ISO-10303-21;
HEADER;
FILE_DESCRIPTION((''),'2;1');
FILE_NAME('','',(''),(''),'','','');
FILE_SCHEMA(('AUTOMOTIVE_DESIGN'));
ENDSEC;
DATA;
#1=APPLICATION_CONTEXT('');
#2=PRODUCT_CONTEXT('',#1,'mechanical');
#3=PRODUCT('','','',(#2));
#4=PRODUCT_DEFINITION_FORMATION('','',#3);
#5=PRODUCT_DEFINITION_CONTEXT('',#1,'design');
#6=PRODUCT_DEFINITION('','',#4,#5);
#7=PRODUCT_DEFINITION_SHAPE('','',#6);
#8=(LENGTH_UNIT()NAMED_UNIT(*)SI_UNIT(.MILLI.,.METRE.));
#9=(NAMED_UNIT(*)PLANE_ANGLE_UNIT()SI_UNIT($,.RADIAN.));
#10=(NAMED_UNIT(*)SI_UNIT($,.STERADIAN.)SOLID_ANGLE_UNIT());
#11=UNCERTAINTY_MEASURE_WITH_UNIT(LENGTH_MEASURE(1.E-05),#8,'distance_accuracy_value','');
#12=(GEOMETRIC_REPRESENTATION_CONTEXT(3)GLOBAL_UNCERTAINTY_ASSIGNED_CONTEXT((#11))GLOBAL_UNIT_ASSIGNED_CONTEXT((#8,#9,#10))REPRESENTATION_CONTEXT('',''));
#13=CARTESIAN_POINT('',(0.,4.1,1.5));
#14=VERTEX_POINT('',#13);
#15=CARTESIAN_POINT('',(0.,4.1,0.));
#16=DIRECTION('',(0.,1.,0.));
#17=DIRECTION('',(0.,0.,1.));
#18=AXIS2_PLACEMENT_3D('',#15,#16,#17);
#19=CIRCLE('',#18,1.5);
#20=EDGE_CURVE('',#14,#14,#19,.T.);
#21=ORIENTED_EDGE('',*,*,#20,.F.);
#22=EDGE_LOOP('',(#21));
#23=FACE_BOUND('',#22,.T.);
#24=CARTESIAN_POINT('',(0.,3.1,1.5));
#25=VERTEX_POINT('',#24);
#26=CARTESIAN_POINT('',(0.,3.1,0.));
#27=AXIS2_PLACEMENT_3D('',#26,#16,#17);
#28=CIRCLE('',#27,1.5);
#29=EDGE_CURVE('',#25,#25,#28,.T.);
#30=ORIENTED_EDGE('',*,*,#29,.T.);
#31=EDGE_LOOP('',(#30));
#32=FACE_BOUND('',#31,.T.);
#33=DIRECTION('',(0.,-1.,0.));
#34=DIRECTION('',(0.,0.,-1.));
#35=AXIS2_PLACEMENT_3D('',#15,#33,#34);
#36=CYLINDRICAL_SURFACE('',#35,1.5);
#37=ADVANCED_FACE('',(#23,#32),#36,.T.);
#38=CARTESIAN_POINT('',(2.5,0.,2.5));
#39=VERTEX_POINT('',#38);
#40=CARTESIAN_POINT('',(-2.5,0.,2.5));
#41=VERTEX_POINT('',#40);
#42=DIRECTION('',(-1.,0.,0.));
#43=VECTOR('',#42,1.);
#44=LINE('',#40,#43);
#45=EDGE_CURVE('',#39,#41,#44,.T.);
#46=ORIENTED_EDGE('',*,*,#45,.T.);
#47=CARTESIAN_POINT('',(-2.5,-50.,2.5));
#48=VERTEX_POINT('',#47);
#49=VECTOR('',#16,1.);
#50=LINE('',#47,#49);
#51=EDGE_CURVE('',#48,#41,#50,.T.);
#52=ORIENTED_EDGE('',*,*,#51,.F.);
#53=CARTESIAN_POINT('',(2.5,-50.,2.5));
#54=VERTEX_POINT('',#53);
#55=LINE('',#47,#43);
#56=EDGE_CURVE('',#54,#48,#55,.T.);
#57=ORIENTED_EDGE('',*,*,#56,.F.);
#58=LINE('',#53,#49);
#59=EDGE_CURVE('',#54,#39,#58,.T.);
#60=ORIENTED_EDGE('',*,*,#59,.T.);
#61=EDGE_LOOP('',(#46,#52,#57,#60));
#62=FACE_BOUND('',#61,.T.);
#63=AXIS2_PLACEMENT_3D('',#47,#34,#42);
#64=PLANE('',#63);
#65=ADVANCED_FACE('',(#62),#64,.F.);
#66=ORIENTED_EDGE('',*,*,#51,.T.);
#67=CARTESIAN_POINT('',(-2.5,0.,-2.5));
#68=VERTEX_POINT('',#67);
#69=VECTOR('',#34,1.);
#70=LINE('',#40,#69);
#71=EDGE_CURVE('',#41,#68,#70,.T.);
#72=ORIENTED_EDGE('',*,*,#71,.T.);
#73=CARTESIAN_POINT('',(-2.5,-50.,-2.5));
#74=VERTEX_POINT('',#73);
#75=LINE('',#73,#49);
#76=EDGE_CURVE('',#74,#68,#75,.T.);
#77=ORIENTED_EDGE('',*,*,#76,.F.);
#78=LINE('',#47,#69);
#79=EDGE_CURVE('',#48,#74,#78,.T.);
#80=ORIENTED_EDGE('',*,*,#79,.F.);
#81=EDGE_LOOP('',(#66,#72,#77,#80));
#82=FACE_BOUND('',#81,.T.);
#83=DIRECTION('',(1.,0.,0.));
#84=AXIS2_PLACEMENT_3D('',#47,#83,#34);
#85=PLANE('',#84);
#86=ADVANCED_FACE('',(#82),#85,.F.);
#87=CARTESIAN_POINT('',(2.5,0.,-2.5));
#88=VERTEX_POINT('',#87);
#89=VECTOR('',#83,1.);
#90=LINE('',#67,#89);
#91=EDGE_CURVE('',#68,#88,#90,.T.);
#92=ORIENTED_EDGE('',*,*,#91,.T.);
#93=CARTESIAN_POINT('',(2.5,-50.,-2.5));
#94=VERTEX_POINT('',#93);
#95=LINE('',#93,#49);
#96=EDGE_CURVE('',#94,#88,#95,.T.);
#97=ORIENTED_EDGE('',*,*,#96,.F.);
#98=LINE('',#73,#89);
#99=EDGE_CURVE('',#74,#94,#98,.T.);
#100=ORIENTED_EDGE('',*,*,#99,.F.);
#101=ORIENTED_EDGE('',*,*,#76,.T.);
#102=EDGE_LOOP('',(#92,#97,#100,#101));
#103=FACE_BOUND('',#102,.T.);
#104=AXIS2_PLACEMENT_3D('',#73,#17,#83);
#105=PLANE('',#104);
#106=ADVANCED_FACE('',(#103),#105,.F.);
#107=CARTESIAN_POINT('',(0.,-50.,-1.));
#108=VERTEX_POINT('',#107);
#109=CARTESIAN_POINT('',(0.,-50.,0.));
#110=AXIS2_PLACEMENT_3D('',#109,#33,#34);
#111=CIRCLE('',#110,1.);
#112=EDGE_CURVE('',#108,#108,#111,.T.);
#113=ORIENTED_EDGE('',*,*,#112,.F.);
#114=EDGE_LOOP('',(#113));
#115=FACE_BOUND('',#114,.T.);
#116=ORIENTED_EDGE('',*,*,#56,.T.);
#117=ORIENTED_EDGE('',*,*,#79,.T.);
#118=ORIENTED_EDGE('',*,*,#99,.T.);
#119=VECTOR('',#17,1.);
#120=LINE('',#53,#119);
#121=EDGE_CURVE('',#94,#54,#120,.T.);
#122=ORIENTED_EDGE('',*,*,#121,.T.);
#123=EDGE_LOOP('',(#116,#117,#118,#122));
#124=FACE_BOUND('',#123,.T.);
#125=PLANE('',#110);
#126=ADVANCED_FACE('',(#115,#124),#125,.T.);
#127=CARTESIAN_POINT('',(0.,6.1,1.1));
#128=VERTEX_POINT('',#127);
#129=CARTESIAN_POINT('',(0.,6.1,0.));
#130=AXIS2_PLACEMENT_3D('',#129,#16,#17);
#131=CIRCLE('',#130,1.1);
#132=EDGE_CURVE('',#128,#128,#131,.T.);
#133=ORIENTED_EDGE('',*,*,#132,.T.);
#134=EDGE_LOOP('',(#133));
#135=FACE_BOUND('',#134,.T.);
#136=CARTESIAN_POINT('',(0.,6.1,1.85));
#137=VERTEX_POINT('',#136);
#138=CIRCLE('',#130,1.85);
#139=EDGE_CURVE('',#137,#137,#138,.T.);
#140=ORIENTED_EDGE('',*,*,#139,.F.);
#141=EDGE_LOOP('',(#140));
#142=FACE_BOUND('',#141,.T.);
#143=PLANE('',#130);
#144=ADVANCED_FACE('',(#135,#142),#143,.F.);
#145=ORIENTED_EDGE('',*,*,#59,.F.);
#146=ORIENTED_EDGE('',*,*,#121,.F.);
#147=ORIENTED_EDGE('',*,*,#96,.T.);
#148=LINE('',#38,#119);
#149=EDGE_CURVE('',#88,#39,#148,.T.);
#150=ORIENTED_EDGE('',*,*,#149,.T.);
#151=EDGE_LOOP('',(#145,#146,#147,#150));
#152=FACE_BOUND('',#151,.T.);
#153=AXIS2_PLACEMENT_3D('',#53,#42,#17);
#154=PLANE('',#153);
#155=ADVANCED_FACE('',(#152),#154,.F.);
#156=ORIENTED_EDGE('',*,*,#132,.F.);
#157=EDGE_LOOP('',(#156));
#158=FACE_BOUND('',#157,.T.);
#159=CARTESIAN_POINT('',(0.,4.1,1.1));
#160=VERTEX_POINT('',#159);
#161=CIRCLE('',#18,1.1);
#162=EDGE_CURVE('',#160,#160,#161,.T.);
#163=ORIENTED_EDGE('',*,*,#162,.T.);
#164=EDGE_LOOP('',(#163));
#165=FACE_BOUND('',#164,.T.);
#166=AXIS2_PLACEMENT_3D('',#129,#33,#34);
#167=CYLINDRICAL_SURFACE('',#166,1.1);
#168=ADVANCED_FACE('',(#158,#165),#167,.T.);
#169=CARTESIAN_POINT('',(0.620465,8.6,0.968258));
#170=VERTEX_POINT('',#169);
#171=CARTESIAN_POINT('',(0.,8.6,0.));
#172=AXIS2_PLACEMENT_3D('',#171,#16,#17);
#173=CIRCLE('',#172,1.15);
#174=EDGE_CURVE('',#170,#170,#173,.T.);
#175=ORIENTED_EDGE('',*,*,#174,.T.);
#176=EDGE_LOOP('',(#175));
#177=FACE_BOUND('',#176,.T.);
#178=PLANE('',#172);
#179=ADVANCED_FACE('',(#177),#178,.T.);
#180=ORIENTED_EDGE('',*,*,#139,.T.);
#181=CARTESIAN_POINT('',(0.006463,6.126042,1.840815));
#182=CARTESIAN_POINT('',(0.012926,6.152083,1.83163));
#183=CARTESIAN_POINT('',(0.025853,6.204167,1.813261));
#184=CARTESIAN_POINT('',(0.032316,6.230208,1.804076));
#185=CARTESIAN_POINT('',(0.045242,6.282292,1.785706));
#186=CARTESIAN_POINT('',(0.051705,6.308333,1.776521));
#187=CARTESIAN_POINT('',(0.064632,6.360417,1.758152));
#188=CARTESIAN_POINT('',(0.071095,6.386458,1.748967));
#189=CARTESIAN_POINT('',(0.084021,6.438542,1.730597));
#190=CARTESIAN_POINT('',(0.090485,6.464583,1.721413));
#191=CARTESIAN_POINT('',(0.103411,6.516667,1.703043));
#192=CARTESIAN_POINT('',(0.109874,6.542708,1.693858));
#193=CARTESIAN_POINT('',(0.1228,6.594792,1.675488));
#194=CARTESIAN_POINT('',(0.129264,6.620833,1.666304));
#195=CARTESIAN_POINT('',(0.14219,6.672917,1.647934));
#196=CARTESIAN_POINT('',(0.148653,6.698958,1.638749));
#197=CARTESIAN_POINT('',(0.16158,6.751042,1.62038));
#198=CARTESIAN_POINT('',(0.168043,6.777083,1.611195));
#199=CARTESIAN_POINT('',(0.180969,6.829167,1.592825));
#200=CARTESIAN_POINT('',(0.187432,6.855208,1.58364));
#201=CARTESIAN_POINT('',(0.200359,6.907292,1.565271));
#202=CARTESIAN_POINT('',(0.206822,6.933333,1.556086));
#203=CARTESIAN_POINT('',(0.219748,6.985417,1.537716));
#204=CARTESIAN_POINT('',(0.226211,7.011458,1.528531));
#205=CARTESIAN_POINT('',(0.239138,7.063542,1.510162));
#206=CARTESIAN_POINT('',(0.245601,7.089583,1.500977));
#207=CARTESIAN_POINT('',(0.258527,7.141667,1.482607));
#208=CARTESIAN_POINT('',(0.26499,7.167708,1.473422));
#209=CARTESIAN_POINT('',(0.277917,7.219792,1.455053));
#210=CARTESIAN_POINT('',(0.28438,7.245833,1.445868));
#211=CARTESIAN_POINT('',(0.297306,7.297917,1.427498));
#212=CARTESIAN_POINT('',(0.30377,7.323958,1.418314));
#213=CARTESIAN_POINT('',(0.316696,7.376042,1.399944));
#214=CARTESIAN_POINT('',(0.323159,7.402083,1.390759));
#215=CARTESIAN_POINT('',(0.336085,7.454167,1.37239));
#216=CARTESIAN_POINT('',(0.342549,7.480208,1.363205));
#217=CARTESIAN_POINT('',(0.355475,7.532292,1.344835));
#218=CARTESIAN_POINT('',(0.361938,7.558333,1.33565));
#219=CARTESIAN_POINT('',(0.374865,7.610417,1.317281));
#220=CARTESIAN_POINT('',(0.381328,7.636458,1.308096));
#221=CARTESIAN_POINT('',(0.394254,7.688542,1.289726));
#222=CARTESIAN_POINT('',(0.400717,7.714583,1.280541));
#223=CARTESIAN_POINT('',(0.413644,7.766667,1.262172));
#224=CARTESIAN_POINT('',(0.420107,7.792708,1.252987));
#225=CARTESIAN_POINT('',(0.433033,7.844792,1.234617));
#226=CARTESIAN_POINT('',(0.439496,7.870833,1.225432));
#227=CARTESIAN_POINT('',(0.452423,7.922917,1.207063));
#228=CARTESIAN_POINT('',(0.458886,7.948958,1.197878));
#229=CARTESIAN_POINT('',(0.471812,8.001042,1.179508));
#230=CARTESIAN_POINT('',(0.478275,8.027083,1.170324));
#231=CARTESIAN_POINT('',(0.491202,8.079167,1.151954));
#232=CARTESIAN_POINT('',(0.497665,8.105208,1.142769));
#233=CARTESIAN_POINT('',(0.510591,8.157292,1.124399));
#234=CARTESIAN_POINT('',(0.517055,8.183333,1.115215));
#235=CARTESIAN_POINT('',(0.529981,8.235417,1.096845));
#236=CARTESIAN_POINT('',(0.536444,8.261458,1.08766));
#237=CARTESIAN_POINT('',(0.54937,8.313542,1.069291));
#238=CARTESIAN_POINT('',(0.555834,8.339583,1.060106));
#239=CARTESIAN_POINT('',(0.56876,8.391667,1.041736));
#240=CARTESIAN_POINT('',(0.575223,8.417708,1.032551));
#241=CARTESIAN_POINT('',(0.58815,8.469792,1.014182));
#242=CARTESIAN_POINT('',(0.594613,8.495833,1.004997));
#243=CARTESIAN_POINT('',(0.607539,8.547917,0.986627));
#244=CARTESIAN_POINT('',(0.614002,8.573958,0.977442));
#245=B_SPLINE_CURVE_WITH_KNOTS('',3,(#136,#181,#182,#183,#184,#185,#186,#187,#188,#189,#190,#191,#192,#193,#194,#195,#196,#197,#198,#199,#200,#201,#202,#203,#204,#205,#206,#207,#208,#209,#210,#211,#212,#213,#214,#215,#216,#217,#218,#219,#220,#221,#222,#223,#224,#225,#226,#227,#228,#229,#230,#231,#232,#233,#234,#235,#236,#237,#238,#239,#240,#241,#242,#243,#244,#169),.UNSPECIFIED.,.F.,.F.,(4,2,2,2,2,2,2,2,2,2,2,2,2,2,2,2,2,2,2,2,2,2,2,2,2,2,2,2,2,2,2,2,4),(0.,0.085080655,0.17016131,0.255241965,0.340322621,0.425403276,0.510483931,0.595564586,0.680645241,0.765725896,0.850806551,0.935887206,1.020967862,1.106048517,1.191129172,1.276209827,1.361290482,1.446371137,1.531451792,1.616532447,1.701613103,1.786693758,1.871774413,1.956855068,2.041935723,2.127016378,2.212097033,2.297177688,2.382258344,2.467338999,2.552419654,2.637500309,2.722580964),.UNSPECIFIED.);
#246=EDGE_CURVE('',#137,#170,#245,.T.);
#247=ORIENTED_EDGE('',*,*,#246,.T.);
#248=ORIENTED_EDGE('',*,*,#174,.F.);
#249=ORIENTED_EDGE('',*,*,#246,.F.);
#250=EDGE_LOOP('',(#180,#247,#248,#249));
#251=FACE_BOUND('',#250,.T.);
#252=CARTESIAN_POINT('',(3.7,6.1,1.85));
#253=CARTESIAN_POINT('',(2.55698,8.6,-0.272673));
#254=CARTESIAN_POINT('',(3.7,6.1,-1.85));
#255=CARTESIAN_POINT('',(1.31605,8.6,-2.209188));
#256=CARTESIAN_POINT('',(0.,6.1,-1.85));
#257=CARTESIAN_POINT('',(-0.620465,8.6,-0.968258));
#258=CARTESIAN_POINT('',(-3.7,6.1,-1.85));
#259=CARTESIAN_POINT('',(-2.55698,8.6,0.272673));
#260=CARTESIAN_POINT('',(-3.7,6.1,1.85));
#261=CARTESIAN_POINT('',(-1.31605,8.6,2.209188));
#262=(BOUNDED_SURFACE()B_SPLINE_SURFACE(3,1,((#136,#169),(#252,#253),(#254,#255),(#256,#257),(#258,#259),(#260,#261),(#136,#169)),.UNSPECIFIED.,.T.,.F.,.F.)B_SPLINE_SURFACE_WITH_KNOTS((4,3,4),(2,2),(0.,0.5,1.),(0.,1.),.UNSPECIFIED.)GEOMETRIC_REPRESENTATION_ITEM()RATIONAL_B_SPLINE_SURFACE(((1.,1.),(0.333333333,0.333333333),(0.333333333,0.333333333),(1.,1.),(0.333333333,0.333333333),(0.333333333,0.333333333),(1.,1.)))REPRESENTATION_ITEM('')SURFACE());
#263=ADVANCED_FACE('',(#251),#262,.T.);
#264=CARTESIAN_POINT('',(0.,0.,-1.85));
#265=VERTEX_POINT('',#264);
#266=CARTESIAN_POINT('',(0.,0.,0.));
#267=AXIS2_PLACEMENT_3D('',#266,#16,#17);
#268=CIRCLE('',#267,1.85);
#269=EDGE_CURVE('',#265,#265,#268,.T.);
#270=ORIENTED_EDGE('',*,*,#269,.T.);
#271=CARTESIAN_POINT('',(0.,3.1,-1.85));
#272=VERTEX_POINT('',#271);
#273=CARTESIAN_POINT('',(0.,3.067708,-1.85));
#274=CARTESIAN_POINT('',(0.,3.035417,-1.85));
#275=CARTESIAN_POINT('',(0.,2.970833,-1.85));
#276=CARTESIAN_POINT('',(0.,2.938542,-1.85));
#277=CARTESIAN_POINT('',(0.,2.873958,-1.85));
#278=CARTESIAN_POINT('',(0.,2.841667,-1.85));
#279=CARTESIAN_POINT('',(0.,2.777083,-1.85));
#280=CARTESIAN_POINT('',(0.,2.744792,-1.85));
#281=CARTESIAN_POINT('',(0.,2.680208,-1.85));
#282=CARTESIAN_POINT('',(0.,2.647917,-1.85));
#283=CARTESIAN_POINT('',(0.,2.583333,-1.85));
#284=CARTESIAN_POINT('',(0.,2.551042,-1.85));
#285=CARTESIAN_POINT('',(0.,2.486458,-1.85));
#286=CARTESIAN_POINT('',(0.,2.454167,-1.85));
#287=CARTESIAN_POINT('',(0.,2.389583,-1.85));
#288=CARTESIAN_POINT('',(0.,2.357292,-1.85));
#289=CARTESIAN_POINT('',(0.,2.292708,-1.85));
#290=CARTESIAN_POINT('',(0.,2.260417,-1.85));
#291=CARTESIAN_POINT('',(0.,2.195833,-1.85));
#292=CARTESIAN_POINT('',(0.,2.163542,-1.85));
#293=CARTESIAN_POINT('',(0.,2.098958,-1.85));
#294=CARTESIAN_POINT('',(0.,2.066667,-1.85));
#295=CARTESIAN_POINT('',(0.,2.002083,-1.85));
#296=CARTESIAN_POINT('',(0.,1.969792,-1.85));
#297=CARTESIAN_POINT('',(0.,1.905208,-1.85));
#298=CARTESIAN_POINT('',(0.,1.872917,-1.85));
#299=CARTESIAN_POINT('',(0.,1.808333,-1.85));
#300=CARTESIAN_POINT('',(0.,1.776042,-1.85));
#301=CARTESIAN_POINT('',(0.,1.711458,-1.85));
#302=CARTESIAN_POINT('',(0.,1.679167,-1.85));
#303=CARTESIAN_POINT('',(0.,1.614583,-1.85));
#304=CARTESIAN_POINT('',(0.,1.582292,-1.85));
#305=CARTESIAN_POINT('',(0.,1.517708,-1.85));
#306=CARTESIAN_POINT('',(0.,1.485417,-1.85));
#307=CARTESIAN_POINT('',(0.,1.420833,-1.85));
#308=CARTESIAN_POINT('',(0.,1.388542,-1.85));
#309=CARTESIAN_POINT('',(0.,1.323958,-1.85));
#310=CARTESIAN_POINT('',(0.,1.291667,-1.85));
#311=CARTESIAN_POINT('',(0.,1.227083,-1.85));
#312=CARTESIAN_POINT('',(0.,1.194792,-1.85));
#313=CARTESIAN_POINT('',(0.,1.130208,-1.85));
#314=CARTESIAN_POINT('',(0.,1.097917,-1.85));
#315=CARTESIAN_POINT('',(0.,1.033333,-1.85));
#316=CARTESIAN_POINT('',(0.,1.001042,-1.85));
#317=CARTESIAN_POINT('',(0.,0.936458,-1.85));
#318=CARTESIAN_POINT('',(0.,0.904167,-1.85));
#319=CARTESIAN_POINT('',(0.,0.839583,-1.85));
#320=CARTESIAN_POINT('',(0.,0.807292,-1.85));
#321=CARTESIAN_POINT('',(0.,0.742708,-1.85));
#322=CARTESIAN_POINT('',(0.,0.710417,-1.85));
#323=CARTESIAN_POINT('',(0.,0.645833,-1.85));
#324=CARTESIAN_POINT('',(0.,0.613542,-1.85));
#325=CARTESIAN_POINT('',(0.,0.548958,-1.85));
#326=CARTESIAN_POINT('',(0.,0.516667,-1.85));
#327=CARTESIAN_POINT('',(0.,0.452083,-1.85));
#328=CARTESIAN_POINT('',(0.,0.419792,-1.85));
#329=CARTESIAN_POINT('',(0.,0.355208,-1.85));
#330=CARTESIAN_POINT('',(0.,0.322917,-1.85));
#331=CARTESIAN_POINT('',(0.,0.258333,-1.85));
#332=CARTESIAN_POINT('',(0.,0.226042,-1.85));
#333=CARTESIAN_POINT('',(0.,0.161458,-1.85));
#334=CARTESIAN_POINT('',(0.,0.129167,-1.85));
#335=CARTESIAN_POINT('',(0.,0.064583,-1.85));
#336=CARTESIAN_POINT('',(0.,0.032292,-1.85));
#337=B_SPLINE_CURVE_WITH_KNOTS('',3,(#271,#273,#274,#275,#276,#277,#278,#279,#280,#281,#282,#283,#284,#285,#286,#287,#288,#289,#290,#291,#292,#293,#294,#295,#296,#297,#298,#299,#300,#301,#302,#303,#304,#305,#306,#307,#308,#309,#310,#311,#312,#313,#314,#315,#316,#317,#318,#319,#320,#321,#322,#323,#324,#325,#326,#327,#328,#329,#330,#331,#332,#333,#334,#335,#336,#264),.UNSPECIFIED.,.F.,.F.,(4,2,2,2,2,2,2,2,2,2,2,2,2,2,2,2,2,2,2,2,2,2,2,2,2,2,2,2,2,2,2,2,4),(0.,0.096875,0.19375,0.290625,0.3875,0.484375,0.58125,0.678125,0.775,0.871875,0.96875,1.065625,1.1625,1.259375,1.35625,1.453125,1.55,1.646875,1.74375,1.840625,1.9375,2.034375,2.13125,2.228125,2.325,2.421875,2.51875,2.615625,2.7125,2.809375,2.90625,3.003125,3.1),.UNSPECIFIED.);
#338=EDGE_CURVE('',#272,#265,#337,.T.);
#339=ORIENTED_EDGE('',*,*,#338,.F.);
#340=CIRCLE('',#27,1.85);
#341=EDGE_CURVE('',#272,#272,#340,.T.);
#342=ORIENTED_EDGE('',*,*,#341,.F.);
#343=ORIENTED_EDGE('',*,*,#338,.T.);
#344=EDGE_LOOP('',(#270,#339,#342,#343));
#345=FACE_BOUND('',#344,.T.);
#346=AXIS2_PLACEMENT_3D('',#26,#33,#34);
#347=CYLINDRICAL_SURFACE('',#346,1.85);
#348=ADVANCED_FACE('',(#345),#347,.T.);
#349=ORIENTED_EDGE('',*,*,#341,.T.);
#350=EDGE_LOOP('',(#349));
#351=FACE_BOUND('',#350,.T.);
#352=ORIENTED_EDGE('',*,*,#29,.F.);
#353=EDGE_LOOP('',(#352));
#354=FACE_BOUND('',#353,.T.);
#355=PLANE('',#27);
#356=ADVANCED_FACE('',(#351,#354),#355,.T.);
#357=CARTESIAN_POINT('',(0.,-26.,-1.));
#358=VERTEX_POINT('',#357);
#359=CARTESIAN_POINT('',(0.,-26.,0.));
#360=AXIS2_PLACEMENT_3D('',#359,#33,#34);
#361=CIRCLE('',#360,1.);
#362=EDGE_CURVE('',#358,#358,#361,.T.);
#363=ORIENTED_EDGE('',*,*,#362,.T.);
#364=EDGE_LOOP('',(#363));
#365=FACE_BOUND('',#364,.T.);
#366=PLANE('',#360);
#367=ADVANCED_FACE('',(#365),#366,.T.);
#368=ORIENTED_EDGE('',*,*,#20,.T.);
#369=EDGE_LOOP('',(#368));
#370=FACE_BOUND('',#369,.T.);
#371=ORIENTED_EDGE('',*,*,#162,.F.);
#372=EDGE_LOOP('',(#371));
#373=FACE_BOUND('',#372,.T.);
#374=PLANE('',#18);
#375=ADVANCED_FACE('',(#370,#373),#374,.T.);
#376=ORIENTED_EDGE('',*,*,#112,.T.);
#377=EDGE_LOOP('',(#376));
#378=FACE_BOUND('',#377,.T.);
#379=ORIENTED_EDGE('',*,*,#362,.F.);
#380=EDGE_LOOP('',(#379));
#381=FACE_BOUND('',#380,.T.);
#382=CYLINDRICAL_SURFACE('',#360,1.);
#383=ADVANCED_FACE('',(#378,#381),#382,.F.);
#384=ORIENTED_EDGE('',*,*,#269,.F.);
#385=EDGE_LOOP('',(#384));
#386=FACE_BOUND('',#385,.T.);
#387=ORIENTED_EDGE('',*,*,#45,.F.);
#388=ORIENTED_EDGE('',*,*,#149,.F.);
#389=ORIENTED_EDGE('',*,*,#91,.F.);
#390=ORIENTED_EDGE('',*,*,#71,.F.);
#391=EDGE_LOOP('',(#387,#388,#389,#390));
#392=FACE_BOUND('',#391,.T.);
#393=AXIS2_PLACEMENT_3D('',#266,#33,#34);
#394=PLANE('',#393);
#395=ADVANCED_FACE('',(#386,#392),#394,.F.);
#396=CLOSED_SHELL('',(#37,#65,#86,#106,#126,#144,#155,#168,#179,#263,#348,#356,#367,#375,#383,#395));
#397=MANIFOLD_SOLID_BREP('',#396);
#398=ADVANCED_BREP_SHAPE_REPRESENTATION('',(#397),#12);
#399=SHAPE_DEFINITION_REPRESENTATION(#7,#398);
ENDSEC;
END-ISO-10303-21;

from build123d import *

# Parameters (mm, degrees)
SKETCH1_R           = 1.85
BOSS_EXTRUDE1_DEPTH = 3.1
SKETCH2_R           = 1.5
BOSS_EXTRUDE2_DEPTH = 1
SKETCH3_R           = 1.1
BOSS_EXTRUDE3_DEPTH = 2
SKETCH6_W           = 5
SKETCH6_H           = 5
BOSS_EXTRUDE4_DEPTH = 50
SKETCH7_R           = 1
CUT_EXTRUDE1_DEPTH  = 24


with BuildPart() as part:
    # Sketch1 → Boss-Extrude1 (new body)
    with BuildSketch(Plane(origin=(0, 0, 0), x_dir=(1, 0, 0), z_dir=(0, 1, 0))):
        with Locations(Location((0, 0, 0), (0, 0, 90))):
            Circle(SKETCH1_R)
    extrude(amount=BOSS_EXTRUDE1_DEPTH)

    # Sketch2 → Boss-Extrude2 (add)
    with BuildSketch(Plane(origin=(0, 3.1, 0), x_dir=(1, 0, 0), z_dir=(0, 1, 0))):
        with Locations(Location((0, 0, 0), (0, 0, 270))):
            Circle(SKETCH2_R)
    extrude(amount=BOSS_EXTRUDE2_DEPTH)

    # Sketch3 → Boss-Extrude3 (add)
    with BuildSketch(Plane(origin=(0, 4.1, 0), x_dir=(1, 0, 0), z_dir=(0, 1, 0))):
        with Locations(Location((0, 0, 0), (0, 0, 270))):
            Circle(SKETCH3_R)
    extrude(amount=BOSS_EXTRUDE3_DEPTH)

    # Loft1: read off the stored shape, not the designer's step
    # Loft1: loft between two sections, ruled curve by curve
    loft1_from = [
        Edge.make_bspline([(0, 6.1, 1.85), (3.7, 6.1, 1.85), (3.7, 6.1, -1.85), (0, 6.1, -1.85), (-3.7, 6.1, -1.85), (-3.7, 6.1, 1.85), (0, 6.1, 1.85)], [0, 0, 0, 0, 0.5, 0.5, 0.5, 1, 1, 1, 1], 3, [1, 0.333333333, 0.333333333, 1, 0.333333333, 0.333333333, 1]),
    ]
    loft1_to = [
        Edge.make_bspline([(0.620465421, 8.6, 0.968257539), (2.556980499, 8.6, -0.272673303), (1.316049657, 8.6, -2.209188381), (-0.620465421, 8.6, -0.968257539), (-2.556980499, 8.6, 0.272673303), (-1.316049657, 8.6, 2.209188381), (0.620465421, 8.6, 0.968257539)], [0, 0, 0, 0, 0.5, 0.5, 0.5, 1, 1, 1, 1], 3, [1, 0.333333333, 0.333333333, 1, 0.333333333, 0.333333333, 1]),
    ]
    loft1 = Solid(Shell([*[Face.make_surface_from_curves(loft1_from[k], loft1_to[k]) for k in range(1)], Face(Wire(loft1_from)), Face(Wire(loft1_to))]))
    add(loft1)

    # Sketch6 → Boss-Extrude4 (add)
    with BuildSketch(Plane.XZ):
        Rectangle(SKETCH6_W, SKETCH6_H)
    extrude(amount=BOSS_EXTRUDE4_DEPTH)

    # Sketch7 → Cut-Extrude1 (cut)
    with BuildSketch(Plane.XZ.offset(50)):
        with Locations(Location((0, 0, 0), (0, 0, 270))):
            Circle(SKETCH7_R)
    extrude(amount=-CUT_EXTRUDE1_DEPTH, mode=Mode.SUBTRACT)


solid = part.part
